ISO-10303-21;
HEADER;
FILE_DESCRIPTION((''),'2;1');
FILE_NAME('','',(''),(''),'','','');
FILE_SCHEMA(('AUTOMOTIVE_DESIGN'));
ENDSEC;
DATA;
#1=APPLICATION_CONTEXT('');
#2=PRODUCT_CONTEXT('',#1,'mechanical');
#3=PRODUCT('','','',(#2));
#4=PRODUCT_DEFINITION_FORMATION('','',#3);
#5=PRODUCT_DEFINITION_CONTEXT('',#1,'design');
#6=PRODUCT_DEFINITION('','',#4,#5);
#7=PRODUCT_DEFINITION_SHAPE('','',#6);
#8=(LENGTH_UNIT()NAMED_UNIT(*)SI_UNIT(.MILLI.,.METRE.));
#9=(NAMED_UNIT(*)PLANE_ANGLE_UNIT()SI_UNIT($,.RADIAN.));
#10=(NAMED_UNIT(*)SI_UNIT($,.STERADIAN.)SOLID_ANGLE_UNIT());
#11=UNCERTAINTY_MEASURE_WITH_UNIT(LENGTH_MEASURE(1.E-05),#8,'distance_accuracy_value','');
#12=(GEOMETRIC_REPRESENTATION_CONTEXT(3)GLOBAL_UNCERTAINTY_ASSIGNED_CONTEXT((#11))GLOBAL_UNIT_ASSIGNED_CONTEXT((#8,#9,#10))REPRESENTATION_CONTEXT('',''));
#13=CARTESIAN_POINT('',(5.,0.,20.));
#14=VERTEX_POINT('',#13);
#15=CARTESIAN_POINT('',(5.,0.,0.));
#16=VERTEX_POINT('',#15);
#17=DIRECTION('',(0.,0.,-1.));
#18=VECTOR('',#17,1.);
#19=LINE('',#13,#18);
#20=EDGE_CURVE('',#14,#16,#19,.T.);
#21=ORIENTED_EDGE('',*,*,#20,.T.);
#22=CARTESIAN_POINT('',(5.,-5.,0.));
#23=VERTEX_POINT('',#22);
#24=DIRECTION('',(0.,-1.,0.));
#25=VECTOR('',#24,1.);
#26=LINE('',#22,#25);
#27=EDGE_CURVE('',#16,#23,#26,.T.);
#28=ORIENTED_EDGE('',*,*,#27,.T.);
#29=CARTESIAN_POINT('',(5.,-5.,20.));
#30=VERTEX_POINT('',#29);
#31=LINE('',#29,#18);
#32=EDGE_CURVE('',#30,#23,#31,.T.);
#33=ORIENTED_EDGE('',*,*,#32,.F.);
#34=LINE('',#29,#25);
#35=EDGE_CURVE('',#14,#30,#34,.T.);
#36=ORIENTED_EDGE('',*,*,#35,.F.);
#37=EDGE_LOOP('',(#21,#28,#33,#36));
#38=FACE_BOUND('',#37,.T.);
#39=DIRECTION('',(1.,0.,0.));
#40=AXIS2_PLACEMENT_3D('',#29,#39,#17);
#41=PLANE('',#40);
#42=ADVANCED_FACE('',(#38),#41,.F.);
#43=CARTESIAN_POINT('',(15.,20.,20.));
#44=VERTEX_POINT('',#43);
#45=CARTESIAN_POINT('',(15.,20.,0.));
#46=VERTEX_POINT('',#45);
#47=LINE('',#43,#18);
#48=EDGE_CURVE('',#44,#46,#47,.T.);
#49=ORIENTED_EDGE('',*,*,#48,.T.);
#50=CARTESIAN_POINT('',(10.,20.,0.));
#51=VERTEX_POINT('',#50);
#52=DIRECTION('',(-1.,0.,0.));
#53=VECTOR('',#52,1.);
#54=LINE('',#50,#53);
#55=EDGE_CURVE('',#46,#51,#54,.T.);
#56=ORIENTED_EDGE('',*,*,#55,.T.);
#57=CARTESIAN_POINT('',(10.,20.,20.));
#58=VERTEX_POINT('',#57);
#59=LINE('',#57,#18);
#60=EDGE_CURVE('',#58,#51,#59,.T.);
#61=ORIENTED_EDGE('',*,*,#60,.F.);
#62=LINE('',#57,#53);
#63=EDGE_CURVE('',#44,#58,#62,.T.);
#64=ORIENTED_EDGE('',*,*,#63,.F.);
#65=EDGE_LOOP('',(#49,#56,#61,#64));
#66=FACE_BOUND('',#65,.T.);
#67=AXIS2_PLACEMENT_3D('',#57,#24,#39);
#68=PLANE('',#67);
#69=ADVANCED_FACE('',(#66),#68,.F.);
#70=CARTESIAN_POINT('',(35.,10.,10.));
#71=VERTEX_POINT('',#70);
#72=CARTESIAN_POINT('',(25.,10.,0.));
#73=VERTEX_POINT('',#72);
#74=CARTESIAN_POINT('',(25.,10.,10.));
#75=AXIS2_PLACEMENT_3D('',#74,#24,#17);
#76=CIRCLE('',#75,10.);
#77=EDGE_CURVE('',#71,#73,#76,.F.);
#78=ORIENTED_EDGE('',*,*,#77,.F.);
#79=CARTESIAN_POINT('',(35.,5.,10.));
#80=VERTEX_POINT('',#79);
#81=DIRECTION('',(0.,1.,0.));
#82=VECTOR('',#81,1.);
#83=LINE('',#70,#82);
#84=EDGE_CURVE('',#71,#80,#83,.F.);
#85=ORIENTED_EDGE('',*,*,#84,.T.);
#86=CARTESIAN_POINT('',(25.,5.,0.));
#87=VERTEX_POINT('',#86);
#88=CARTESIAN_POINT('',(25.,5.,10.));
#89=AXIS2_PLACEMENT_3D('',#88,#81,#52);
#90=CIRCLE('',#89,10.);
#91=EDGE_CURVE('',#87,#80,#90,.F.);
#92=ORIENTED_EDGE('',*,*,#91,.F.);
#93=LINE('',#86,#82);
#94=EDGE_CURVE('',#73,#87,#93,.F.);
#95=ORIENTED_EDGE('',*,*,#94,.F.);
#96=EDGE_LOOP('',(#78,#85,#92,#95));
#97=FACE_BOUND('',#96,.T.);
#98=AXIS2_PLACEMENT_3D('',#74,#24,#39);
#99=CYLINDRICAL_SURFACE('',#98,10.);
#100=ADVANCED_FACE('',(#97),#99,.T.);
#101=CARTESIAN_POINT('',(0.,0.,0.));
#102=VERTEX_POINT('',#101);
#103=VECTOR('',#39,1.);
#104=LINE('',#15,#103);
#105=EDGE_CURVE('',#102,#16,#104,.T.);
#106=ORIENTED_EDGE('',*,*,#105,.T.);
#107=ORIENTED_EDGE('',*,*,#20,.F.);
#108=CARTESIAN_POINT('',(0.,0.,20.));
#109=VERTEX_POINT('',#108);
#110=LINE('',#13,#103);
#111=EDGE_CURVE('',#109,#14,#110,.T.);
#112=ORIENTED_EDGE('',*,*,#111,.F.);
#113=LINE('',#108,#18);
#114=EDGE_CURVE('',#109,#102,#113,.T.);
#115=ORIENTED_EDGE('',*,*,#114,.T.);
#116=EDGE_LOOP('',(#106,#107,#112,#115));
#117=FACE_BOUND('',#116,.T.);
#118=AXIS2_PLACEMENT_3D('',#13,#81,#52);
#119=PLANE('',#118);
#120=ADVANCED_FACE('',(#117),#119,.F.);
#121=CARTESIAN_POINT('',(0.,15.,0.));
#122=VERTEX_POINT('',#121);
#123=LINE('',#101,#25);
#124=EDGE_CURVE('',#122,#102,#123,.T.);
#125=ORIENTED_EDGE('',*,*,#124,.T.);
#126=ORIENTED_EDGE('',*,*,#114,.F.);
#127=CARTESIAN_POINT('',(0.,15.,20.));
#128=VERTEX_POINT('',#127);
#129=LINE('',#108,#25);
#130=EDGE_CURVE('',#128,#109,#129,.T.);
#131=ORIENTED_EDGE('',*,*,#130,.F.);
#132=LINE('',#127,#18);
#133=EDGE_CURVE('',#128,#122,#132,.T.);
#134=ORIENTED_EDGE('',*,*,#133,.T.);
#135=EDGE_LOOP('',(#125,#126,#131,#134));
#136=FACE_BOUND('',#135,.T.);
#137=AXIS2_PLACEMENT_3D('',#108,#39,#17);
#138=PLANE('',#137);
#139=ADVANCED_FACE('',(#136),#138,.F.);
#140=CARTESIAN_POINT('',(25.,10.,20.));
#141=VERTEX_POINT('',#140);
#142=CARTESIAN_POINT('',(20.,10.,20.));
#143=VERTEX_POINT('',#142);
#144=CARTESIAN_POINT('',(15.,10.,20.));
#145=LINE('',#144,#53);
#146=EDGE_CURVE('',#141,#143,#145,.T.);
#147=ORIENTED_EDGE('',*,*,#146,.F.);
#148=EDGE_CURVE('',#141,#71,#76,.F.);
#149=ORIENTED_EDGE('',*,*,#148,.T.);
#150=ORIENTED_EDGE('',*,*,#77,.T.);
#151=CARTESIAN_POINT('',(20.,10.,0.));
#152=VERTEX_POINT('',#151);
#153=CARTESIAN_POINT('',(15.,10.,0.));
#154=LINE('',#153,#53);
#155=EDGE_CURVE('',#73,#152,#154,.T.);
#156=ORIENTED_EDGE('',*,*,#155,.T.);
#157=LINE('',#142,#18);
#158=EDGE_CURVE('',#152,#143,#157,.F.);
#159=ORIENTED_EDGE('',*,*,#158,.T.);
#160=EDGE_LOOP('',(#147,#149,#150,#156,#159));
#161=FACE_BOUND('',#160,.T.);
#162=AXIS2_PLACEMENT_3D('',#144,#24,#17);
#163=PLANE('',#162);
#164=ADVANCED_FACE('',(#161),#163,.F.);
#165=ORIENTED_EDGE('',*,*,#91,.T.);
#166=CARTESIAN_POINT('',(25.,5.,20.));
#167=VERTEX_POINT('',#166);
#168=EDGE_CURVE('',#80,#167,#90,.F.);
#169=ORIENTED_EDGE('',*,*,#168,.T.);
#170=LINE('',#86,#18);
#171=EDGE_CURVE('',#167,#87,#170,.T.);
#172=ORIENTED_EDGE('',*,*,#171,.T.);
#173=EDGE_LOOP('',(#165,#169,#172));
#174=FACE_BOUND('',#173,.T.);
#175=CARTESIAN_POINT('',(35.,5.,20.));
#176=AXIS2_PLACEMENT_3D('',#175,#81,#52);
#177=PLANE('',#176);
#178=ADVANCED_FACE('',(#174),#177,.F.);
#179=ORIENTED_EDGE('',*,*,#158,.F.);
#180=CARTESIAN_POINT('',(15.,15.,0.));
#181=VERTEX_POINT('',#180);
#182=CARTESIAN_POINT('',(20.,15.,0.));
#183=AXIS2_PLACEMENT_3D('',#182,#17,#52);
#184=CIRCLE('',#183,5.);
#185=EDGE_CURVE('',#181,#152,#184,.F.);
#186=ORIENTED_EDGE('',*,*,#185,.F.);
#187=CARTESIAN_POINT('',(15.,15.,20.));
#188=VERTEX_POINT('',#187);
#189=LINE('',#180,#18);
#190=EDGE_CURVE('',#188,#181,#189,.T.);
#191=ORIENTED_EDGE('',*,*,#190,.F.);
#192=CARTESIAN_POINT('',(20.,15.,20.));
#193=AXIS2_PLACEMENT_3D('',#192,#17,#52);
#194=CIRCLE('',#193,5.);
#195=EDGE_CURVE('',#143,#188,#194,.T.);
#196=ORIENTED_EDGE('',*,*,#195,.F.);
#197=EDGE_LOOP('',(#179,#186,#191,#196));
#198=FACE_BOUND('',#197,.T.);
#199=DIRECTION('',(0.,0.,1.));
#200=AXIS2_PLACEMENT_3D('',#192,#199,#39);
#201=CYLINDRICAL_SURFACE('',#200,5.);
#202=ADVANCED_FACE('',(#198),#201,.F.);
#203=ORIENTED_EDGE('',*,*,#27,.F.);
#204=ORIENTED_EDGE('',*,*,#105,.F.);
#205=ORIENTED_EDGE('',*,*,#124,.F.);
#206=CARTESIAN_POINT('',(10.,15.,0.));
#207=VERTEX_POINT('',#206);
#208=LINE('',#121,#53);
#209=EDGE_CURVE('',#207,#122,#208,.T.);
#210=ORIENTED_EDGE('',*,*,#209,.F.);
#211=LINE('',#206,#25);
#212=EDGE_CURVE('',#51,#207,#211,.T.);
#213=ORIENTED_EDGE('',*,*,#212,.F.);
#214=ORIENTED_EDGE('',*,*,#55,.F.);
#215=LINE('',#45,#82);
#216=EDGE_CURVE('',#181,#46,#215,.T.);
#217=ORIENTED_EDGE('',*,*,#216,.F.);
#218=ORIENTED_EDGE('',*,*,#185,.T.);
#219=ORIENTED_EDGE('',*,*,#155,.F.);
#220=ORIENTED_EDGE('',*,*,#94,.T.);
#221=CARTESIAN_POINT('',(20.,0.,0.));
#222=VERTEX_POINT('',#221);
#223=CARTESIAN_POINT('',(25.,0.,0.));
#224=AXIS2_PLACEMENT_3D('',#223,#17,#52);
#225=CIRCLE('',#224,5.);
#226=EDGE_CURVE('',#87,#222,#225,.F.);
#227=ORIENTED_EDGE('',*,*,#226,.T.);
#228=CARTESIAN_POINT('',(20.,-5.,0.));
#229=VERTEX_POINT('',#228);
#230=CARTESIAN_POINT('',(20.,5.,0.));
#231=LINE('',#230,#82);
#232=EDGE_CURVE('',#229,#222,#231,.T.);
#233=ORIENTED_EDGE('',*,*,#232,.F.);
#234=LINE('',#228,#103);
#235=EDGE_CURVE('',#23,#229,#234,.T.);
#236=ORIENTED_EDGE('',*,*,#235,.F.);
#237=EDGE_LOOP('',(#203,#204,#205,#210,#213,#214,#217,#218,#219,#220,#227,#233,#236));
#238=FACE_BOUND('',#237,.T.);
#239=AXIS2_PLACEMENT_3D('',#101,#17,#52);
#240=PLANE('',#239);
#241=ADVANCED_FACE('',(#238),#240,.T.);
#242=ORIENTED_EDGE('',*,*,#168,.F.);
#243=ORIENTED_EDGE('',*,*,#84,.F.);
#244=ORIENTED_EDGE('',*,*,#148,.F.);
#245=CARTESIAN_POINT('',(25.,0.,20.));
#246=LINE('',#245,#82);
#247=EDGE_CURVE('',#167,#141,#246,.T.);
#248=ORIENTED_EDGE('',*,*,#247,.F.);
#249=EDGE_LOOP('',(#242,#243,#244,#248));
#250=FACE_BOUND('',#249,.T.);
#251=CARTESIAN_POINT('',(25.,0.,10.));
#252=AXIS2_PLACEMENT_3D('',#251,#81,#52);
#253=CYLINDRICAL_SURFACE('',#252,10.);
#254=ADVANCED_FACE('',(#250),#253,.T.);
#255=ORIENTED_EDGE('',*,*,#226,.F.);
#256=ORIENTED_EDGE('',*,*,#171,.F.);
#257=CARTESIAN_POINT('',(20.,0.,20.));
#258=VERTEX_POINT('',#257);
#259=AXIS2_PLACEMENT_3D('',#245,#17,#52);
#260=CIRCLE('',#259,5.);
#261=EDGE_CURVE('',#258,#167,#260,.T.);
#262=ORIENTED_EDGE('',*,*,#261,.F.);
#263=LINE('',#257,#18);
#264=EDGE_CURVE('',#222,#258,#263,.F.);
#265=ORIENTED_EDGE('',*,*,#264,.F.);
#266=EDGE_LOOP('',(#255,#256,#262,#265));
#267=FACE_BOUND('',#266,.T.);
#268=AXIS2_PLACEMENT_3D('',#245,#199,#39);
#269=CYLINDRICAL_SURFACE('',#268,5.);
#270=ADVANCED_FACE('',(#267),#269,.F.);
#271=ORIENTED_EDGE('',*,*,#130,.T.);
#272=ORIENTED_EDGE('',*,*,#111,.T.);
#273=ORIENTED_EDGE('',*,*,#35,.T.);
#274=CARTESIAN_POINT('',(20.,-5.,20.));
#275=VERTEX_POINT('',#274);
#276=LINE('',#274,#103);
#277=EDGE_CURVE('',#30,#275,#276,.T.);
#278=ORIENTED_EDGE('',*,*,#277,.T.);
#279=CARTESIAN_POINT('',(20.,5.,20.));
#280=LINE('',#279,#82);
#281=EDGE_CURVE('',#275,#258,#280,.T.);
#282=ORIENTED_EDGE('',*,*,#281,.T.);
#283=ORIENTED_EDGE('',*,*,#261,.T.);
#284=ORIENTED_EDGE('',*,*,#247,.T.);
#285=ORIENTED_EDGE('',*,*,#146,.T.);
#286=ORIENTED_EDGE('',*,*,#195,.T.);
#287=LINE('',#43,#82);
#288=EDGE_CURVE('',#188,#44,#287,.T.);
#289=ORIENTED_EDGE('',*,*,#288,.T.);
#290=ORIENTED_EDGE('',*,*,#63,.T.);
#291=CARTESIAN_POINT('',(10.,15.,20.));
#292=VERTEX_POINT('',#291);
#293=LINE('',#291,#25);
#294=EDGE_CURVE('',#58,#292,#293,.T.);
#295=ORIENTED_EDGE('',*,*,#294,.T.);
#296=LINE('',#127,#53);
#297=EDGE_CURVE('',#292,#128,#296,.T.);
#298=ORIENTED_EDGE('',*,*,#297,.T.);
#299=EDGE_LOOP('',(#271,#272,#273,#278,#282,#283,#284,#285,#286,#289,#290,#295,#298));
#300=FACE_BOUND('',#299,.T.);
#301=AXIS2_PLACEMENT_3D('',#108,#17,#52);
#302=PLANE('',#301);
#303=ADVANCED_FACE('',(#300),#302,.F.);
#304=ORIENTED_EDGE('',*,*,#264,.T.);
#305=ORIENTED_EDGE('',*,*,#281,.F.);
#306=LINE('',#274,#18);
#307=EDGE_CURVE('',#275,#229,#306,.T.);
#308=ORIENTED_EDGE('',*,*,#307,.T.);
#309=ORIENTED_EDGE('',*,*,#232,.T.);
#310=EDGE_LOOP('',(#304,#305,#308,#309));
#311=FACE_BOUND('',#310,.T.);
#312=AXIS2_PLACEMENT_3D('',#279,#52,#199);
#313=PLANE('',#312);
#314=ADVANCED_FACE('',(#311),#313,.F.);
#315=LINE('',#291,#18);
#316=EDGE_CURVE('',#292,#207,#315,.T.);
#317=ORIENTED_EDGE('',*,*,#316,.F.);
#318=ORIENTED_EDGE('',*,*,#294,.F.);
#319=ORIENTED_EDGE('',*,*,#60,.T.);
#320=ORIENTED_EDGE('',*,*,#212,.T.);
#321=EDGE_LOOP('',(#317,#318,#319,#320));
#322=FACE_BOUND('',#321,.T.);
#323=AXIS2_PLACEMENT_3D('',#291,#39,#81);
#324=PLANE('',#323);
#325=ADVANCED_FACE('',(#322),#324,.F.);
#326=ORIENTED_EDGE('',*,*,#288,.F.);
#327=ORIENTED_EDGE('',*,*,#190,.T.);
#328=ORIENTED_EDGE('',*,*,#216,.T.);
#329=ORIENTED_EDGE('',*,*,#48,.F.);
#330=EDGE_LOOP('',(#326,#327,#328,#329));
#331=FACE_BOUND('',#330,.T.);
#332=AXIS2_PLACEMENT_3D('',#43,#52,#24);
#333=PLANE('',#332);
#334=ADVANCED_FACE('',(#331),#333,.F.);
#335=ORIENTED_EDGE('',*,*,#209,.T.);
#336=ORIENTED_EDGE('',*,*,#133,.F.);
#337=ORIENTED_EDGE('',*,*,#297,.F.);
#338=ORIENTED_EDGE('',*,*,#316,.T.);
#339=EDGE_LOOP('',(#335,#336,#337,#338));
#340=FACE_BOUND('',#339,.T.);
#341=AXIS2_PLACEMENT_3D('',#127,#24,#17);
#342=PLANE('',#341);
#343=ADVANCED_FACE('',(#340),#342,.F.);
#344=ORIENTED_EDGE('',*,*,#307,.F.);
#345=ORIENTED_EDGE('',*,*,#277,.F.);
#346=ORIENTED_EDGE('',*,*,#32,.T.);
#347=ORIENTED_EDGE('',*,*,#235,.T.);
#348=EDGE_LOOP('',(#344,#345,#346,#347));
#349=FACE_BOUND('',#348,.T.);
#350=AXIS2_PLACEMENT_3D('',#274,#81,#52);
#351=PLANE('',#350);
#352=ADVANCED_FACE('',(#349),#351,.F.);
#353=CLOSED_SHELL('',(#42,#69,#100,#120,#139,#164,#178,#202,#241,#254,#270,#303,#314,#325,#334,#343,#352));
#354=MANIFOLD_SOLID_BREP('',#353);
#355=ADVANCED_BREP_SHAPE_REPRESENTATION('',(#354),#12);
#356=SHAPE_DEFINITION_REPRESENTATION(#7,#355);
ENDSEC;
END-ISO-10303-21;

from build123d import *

# Parameters (mm, degrees)
EXTRUDE_1_DEPTH = 20
FILLET_2_R      = 10
FILLET_1_R      = 5


with BuildPart() as part:
    # 草圖1 → 填料-伸長1 (new body)
    with BuildSketch(Plane.XY):
        Polygon((0, 0), (0, 15), (10, 15), (10, 20), (15, 20), (15, 10), (35, 10), (35, 5), (20, 5), (20, -5), (5, -5), (5, 0), align=None)
    extrude(amount=EXTRUDE_1_DEPTH)

    # 圓角2
    fillet_2_edges = [part.edges().sort_by_distance(p)[0] for p in [
        (35, 7.5, 0),
        (35, 7.5, 20),
    ]]
    fillet(fillet_2_edges, radius=FILLET_2_R - 0.0001)  # a hair under: the kernel refuses the full size

    # 圓角1
    fillet_1_edges = [part.edges().sort_by_distance(p)[0] for p in [
        (20, 5, 10),
        (15, 10, 10),
    ]]
    fillet(fillet_1_edges, radius=FILLET_1_R)


solid = part.part
